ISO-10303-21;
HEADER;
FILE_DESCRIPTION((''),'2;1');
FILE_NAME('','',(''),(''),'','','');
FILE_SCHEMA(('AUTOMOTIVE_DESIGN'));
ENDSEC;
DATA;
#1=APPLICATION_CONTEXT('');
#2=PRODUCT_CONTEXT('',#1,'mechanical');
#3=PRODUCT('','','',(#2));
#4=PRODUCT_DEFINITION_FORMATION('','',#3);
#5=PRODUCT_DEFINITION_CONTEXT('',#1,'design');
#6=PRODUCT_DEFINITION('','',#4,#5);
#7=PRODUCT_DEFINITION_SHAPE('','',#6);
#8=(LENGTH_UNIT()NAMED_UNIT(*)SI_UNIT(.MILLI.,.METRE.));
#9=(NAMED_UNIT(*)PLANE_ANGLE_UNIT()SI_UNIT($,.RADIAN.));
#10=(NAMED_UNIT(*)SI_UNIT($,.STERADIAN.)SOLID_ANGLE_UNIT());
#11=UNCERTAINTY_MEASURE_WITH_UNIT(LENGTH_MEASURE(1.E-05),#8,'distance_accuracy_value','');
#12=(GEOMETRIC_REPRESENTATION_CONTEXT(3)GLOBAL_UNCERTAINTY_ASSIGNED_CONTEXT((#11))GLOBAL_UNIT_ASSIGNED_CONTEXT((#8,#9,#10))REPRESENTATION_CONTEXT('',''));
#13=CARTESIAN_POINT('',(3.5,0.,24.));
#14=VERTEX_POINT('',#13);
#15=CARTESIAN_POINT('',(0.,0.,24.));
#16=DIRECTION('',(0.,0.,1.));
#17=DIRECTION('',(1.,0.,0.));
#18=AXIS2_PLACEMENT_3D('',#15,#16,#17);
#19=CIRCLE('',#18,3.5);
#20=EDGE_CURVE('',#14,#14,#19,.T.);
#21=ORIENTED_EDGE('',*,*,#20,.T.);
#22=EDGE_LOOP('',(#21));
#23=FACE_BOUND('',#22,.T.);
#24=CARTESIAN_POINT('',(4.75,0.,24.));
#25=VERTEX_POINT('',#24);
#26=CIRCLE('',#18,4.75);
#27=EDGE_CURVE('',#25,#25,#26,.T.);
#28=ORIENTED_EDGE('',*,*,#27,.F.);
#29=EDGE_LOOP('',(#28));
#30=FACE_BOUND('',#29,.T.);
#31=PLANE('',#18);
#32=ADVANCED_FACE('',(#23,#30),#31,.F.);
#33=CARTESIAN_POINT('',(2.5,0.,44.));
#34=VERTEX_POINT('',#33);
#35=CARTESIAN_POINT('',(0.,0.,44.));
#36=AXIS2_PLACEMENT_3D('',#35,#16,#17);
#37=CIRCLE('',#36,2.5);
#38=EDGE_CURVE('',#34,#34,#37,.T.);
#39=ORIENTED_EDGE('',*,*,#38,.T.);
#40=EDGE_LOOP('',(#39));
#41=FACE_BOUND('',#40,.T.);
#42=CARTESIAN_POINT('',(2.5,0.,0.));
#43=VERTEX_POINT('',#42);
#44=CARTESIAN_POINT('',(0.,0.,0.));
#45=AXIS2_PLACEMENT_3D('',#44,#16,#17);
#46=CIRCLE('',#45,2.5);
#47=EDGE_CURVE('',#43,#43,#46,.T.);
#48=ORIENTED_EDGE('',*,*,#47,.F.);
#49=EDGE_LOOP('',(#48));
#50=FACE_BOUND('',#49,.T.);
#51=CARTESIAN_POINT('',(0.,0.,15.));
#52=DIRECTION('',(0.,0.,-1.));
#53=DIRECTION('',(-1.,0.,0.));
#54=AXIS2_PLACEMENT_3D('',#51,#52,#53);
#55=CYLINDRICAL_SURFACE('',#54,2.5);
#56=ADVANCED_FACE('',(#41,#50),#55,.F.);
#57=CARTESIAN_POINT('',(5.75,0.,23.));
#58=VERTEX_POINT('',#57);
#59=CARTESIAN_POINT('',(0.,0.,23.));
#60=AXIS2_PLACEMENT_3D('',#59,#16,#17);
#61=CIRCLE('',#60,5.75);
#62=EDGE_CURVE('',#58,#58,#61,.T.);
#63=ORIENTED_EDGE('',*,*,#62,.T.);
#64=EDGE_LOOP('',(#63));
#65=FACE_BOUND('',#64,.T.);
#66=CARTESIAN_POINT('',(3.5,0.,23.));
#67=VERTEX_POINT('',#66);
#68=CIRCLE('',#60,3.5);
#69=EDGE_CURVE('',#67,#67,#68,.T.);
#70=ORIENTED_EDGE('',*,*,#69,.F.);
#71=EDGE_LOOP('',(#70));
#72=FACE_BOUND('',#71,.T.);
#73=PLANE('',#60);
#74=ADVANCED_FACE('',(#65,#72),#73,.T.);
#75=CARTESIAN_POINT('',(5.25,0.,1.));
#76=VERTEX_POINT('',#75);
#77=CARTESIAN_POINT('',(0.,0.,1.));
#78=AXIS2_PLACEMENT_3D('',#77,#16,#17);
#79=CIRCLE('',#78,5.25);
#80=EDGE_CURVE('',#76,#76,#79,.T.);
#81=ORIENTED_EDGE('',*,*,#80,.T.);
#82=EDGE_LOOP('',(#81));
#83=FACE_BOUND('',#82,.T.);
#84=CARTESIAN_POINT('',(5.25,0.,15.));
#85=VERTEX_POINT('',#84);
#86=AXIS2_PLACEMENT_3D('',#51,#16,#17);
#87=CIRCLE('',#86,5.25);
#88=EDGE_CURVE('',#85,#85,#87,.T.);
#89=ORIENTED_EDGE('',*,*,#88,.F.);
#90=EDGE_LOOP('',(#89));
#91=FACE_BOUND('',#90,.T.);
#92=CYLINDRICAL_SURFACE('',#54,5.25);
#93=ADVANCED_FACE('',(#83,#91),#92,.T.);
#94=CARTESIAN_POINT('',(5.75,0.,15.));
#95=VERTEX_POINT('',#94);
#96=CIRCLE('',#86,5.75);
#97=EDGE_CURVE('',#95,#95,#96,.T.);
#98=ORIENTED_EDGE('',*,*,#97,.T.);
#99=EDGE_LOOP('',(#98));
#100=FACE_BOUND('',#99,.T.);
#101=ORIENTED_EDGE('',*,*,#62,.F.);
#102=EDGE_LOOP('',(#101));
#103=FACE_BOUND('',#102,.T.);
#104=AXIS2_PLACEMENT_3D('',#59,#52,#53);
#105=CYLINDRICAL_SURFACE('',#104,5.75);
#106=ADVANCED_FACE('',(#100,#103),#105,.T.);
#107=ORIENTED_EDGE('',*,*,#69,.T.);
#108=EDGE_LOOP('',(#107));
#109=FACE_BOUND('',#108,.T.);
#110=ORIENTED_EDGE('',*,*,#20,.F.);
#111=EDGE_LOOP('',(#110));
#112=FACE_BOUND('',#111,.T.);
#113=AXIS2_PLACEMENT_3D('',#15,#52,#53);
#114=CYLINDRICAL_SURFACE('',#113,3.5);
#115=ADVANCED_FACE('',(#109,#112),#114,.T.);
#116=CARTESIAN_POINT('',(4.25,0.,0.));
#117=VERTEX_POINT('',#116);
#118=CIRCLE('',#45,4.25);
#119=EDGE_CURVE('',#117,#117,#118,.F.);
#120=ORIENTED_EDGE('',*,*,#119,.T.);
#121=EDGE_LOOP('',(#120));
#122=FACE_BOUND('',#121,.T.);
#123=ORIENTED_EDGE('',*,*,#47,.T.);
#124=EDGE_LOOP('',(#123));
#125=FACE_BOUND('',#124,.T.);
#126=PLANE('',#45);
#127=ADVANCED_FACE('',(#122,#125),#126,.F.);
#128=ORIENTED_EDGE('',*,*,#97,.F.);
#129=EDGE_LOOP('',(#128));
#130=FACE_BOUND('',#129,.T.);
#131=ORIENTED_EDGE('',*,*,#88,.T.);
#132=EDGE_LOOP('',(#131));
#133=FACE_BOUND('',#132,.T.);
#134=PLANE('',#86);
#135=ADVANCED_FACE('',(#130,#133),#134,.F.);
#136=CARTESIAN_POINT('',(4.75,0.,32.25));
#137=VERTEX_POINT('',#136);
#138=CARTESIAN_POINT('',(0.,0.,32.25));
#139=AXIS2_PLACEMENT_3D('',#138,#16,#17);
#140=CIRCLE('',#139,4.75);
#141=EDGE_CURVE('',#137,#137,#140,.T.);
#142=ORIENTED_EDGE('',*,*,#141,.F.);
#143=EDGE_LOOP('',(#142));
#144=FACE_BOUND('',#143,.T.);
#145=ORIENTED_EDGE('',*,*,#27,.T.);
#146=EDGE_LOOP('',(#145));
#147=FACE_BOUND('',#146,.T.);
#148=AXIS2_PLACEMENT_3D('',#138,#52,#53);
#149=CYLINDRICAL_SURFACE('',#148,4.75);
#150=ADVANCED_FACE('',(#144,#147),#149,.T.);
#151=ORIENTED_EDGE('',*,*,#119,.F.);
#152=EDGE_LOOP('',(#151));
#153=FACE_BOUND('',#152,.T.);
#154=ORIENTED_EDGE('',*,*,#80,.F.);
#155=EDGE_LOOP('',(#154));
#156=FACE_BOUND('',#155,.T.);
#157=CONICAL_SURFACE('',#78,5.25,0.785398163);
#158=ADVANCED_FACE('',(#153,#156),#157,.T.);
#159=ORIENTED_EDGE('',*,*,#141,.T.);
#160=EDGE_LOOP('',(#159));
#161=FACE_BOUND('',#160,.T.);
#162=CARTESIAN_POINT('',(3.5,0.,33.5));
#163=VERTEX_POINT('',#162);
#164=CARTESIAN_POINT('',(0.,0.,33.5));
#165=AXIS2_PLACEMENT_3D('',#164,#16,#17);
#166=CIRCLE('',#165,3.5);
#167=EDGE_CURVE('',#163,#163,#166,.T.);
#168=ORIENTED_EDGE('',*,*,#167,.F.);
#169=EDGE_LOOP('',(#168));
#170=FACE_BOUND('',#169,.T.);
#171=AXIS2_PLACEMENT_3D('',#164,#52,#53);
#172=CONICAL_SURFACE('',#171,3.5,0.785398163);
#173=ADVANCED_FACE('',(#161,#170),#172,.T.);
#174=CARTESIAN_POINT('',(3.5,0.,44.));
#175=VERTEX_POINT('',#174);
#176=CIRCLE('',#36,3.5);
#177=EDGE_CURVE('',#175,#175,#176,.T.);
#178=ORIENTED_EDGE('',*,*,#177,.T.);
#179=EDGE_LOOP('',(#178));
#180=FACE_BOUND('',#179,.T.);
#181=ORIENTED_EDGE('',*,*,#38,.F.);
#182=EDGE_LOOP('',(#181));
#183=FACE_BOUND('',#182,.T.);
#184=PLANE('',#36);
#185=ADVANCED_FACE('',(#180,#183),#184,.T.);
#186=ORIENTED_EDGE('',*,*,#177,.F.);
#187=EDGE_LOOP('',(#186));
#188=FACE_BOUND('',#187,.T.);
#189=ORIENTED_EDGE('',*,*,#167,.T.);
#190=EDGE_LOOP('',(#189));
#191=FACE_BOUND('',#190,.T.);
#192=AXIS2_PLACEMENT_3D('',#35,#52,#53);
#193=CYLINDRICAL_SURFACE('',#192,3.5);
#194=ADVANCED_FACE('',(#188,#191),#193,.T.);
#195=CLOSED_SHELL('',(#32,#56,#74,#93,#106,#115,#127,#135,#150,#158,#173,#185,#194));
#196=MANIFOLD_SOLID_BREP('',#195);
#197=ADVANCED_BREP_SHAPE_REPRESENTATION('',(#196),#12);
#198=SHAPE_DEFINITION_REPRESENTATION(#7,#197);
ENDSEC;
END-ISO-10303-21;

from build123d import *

# Parameters (mm, degrees)
ESQUISSE1_R        = 5.25
ESQUISSE1_R_2      = 2.5
BOSS_EXTRU_1_DEPTH = 15
ESQUISSE2_R        = 5.75
ESQUISSE2_R_2      = 2.5
BOSS_EXTRU_2_DEPTH = 8
ESQUISSE3_R        = 3.5
ESQUISSE3_R_2      = 2.5
BOSS_EXTRU_3_DEPTH = 1
ESQUISSE4_R        = 4.75
ESQUISSE4_R_2      = 2.5
BOSS_EXTRU_4_DEPTH = 8.25
ESQUISSE5_R        = 3.5
ESQUISSE5_R_2      = 2.5
BOSS_EXTRU_5_DEPTH = 11.75
CHANFREIN1_SIZE    = 1.25
CHANFREIN2_SIZE    = 1


with BuildPart() as part:
    # Esquisse1 → Boss.-Extru.1 (new body)
    with BuildSketch(Plane.XY):
        Circle(ESQUISSE1_R)
        Circle(ESQUISSE1_R_2, mode=Mode.SUBTRACT)
    extrude(amount=BOSS_EXTRU_1_DEPTH)

    # Esquisse2 → Boss.-Extru.2 (add)
    with BuildSketch(Plane.XY.offset(15)):
        Circle(ESQUISSE2_R)
        Circle(ESQUISSE2_R_2, mode=Mode.SUBTRACT)
    extrude(amount=BOSS_EXTRU_2_DEPTH)

    # Esquisse3 → Boss.-Extru.3 (add)
    with BuildSketch(Plane.XY.offset(23)):
        Circle(ESQUISSE3_R)
        Circle(ESQUISSE3_R_2, mode=Mode.SUBTRACT)
    extrude(amount=BOSS_EXTRU_3_DEPTH)

    # Esquisse4 → Boss.-Extru.4 (add)
    with BuildSketch(Plane.XY.offset(24)):
        Circle(ESQUISSE4_R)
        Circle(ESQUISSE4_R_2, mode=Mode.SUBTRACT)
    extrude(amount=BOSS_EXTRU_4_DEPTH)

    # Esquisse5 → Boss.-Extru.5 (add)
    with BuildSketch(Plane.XY.offset(32.25)):
        Circle(ESQUISSE5_R)
        Circle(ESQUISSE5_R_2, mode=Mode.SUBTRACT)
    extrude(amount=BOSS_EXTRU_5_DEPTH)

    # Chanfrein1
    chanfrein1_edges = [part.edges().sort_by_distance(p)[0] for p in [
        (-3.5, 0, 32.25),
    ]]
    chamfer(chanfrein1_edges, length=CHANFREIN1_SIZE - 0.0001)  # a hair under: the kernel refuses the full size

    # Chanfrein2
    chanfrein2_edges = [part.edges().sort_by_distance(p)[0] for p in [
        (-5.25, 0, 0),
    ]]
    chamfer(chanfrein2_edges, length=CHANFREIN2_SIZE)


solid = part.part
